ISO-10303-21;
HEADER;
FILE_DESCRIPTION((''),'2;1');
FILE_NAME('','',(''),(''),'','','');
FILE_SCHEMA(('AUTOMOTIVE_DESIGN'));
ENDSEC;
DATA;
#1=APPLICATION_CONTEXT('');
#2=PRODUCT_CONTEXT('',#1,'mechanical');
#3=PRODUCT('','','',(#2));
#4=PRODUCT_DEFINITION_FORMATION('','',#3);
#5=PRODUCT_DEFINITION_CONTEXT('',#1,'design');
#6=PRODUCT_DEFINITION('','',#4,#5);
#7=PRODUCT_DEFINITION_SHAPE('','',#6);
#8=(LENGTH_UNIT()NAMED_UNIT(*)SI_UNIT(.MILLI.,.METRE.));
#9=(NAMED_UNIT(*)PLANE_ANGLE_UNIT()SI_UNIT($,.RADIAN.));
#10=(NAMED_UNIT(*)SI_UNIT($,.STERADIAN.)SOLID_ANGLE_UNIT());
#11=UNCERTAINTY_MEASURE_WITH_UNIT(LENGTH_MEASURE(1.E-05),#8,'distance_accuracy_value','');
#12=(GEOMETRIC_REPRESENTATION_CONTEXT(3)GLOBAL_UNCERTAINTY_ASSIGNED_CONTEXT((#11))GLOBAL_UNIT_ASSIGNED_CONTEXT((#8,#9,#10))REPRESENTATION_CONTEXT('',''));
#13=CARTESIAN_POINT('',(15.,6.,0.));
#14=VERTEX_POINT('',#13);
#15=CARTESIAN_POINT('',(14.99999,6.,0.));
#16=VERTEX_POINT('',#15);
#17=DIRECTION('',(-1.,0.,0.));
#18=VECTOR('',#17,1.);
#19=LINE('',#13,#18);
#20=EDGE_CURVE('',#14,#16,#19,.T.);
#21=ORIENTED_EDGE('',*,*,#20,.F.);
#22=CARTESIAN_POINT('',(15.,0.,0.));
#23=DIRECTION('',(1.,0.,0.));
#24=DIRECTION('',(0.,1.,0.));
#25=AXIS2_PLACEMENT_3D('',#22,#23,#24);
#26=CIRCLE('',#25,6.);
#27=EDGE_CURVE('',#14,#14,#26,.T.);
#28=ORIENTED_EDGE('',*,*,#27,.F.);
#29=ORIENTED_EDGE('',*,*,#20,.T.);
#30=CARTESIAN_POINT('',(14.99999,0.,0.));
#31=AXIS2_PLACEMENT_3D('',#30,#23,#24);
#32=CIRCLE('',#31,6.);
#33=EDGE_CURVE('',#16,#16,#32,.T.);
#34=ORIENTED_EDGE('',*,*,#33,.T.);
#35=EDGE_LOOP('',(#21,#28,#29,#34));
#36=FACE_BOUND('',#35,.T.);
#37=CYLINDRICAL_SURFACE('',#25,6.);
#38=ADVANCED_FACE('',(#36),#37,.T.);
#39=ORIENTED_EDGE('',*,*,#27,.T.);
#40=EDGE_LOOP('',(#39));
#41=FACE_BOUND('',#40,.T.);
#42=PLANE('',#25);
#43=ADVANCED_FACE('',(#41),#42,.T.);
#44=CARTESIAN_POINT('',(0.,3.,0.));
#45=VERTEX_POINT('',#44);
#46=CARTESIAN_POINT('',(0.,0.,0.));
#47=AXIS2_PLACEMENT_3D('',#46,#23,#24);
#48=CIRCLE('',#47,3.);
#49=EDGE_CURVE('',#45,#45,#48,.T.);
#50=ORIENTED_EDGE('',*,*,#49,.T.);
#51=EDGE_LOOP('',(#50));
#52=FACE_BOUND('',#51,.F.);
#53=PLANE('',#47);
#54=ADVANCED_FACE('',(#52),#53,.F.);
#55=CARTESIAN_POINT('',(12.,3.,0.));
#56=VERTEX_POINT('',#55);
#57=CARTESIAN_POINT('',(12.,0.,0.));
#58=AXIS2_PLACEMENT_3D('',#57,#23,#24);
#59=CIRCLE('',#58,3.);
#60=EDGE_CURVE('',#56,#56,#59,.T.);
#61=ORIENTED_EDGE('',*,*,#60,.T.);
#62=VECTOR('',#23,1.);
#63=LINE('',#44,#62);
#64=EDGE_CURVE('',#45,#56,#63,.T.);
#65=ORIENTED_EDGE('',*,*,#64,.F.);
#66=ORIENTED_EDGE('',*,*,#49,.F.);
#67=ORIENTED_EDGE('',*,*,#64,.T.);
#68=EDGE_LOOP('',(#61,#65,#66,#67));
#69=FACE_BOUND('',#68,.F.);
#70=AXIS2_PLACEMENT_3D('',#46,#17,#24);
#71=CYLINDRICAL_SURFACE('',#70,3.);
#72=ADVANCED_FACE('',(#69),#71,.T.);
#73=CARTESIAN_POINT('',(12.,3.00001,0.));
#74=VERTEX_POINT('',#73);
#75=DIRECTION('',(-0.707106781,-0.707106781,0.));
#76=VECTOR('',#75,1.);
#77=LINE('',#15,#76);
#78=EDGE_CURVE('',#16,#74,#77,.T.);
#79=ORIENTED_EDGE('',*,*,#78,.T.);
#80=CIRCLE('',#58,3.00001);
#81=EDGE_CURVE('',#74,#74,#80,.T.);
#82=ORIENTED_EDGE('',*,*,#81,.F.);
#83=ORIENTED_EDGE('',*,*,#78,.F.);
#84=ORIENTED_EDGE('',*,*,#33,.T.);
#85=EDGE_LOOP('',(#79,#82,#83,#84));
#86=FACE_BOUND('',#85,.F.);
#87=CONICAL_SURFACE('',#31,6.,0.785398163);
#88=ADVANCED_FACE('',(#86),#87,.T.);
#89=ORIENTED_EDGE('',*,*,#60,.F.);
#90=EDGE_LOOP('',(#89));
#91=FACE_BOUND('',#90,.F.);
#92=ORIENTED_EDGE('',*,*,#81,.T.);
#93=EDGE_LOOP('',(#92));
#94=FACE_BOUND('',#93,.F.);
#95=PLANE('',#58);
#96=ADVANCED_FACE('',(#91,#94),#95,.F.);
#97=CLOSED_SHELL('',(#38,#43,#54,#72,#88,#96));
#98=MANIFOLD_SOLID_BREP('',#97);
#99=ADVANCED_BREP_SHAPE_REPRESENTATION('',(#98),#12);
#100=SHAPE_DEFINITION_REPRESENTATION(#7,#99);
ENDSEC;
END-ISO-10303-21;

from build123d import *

# Parameters (mm, degrees)
F0_R     = 3
F1_DEPTH = 15
F2_R     = 6
F2_R_2   = 3
F3_DEPTH = 3
F4_SIZE  = 2.99999


# Not quite as in the source:
# - a fillet or chamfer is up to 0.001 mm smaller than in the source, because OpenCascade refuses the exact size


with BuildPart() as f1:
    # F0 (on Right) → F1 (new body)
    with BuildSketch(Plane.YZ):
        Circle(F0_R)
    extrude(amount=F1_DEPTH)

    # F2 (on face) → F3 (join)
    with BuildSketch(Plane.YZ.offset(15)):
        Circle(F2_R)
        Circle(F2_R_2, mode=Mode.SUBTRACT)
    extrude(amount=-F3_DEPTH)

    # F4 (size 3 in the source; OpenCascade refuses exactly that, so slightly less here)
    f4_edges = [f1.edges().sort_by_distance(p)[0] for p in [
        (12, -6, 0),
    ]]
    chamfer(f4_edges, length=F4_SIZE)


solid = f1.part
